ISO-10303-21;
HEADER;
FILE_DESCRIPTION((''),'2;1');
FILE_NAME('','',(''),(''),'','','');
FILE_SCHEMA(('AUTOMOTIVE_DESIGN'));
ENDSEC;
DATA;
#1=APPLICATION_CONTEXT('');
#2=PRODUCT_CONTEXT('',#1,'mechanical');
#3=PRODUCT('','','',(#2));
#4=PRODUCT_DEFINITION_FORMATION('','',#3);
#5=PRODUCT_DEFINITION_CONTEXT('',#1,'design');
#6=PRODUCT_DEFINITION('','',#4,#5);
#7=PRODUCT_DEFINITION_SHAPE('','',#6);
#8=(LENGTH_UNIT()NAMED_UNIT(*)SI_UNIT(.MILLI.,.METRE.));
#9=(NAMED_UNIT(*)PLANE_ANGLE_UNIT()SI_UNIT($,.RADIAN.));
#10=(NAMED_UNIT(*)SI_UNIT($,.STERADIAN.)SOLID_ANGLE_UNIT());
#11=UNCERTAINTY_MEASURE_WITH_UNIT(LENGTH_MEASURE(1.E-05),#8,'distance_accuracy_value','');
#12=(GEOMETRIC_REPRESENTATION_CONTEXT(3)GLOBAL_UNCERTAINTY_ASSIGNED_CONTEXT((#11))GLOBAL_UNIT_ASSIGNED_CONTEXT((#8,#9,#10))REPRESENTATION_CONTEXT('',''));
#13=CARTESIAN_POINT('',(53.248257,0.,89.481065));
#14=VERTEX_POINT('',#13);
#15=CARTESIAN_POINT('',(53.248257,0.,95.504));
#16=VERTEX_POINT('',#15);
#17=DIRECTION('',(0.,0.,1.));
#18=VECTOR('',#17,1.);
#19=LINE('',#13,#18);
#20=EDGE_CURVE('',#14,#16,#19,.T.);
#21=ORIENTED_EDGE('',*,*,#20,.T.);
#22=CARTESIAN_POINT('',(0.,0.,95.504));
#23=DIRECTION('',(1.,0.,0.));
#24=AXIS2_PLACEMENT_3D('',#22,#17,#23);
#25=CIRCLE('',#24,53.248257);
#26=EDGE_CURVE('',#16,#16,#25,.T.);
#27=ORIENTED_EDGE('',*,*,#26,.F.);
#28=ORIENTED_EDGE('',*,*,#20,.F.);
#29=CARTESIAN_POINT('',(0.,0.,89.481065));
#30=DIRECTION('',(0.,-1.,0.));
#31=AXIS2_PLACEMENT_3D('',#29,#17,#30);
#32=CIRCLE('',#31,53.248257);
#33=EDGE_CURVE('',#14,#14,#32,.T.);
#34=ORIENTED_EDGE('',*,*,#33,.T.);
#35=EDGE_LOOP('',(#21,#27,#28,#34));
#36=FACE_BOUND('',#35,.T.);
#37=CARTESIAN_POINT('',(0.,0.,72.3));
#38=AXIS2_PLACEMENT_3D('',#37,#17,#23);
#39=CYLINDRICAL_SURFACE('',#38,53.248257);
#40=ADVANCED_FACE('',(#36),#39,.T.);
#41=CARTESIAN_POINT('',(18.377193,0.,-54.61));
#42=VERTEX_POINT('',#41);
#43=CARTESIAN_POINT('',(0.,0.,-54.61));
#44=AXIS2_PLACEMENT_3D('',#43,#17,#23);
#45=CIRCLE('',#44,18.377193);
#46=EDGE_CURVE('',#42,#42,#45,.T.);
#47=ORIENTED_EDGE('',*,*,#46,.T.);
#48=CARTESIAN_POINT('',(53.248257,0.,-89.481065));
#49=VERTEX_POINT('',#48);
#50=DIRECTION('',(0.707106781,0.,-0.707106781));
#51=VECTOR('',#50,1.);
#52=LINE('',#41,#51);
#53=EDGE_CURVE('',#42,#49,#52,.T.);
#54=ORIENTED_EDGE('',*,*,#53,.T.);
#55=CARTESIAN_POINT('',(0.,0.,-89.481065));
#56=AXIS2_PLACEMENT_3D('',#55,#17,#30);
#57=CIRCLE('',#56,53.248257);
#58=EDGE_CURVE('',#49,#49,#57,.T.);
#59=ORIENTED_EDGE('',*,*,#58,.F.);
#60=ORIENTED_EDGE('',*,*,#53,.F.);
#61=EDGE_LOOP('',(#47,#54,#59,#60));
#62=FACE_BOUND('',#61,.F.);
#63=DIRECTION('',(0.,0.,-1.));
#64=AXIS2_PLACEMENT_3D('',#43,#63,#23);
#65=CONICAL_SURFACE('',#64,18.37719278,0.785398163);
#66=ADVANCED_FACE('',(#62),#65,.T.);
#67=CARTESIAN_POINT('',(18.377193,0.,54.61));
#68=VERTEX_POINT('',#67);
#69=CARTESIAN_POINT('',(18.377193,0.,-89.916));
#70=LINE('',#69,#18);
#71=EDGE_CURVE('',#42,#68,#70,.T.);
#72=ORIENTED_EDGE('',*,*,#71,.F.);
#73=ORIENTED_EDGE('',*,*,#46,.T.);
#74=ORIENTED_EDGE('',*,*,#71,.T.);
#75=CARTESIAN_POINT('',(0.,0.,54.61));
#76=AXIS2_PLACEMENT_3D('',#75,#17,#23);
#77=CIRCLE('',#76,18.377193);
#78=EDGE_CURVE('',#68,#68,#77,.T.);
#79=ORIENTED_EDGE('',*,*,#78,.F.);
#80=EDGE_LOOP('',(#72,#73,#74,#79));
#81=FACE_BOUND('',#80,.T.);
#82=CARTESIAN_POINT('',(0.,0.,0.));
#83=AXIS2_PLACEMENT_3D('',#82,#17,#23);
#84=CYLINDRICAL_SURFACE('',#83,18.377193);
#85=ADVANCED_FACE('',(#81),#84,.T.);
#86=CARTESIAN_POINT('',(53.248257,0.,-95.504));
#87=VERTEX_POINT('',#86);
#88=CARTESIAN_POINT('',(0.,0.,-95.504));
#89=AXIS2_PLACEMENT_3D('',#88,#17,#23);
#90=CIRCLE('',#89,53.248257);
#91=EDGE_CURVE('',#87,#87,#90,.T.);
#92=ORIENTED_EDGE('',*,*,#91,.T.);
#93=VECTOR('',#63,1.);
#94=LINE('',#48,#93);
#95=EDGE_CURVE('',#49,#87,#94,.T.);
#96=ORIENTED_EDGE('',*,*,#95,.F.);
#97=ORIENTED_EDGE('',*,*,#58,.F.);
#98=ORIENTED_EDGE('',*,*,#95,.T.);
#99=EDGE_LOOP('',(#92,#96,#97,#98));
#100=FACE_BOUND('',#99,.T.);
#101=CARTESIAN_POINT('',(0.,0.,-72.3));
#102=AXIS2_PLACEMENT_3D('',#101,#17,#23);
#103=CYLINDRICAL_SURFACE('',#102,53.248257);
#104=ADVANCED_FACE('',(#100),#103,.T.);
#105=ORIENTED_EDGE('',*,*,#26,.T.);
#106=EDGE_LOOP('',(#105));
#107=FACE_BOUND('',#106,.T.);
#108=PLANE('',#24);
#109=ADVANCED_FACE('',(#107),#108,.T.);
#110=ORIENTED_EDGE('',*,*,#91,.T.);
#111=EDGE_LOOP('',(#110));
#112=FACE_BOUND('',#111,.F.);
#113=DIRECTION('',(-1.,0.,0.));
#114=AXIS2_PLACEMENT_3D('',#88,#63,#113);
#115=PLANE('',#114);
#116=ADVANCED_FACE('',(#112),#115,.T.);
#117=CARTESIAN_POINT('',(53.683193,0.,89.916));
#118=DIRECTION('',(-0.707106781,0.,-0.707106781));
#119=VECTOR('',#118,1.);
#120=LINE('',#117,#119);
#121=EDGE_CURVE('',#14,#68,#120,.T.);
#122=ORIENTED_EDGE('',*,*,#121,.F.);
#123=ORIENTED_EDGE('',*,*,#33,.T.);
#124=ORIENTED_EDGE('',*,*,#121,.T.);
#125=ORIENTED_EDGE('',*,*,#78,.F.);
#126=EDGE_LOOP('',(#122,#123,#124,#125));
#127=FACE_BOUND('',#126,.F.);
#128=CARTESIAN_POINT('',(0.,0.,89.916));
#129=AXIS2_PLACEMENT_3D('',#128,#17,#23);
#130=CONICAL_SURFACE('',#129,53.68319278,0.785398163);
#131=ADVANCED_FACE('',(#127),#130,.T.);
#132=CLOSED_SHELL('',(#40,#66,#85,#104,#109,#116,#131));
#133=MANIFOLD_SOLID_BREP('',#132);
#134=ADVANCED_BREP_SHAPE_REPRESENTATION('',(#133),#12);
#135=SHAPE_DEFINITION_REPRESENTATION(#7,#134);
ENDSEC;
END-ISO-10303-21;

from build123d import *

# Parameters (mm, degrees)
F0_R         = 18.3771927797
F1_DEPTH     = 89.916
F2_R         = 53.2482574965
F2_R_2       = 18.3771927797
F3_DEPTH     = 5.588
F5_S5_R      = 53.2482574965
F5_T6_DEPTH  = 79
F5_S11_R     = 53.2482574965
F5_T12_DEPTH = 79


# Not quite as in the source:
# - a fillet or chamfer that OpenCascade refuses, or shapes differently, is made with other operations: its cross-section is extruded or revolved along the edge and cut away or added


with BuildPart() as f1:
    # F0 (on Top) → F1 (new body)
    with BuildSketch(Plane.XY):
        Circle(F0_R)
    extrude(amount=F1_DEPTH)

    # F2 (on face) → F3 (join)
    with BuildSketch(Plane.XY.offset(89.916)):
        Circle(F2_R)
        Circle(F2_R_2, mode=Mode.SUBTRACT)
        Circle(F2_R_2)
    extrude(amount=F3_DEPTH)

    # F4: F1 across plane


with BuildPart() as f1_1:
    add(f1.part)
    add(f1.part.mirror(Plane.XY))

    # F5: chamfer of 35.306 on 5 edges, made by hand


with BuildPart() as f5_tool2:
    # F5_s3 → F5_t4 (revolve)
    with BuildSketch(Plane.XZ):
        Polygon((53.6831927797, 89.916), (18.3771927797, 54.61), (18.3771927797, 89.916), align=None)
    revolve(axis=Axis((0, 0, 89.916), (0, 0, 1)))

    # F5_s5 → F5_t6 (intersect, symmetric)
    with BuildSketch(Plane.XY.offset(72.3)):
        Circle(F5_S5_R)
    extrude(amount=F5_T6_DEPTH, both=True, mode=Mode.INTERSECT)


with BuildPart() as f1_2:
    add(f1_1.part)

    # F5_t1: union F5_tool2
    add(f5_tool2.part)


with BuildPart() as f5_tool8:
    # F5_s9 → F5_t10 (revolve)
    with BuildSketch(Plane.XZ):
        Polygon((18.3771927797, -54.61), (53.6831927797, -89.916), (18.3771927797, -89.916), align=None)
    revolve(axis=Axis((0, 0, -89.916), (0, 0, 1)))

    # F5_s11 → F5_t12 (intersect, symmetric)
    with BuildSketch(Plane.XY.offset(-72.3)):
        Circle(F5_S11_R)
    extrude(amount=F5_T12_DEPTH, both=True, mode=Mode.INTERSECT)


with BuildPart() as f1_3:
    add(f1_2.part)

    # F5_t7: union F5_tool8
    add(f5_tool8.part)


solid = f1_3.part
